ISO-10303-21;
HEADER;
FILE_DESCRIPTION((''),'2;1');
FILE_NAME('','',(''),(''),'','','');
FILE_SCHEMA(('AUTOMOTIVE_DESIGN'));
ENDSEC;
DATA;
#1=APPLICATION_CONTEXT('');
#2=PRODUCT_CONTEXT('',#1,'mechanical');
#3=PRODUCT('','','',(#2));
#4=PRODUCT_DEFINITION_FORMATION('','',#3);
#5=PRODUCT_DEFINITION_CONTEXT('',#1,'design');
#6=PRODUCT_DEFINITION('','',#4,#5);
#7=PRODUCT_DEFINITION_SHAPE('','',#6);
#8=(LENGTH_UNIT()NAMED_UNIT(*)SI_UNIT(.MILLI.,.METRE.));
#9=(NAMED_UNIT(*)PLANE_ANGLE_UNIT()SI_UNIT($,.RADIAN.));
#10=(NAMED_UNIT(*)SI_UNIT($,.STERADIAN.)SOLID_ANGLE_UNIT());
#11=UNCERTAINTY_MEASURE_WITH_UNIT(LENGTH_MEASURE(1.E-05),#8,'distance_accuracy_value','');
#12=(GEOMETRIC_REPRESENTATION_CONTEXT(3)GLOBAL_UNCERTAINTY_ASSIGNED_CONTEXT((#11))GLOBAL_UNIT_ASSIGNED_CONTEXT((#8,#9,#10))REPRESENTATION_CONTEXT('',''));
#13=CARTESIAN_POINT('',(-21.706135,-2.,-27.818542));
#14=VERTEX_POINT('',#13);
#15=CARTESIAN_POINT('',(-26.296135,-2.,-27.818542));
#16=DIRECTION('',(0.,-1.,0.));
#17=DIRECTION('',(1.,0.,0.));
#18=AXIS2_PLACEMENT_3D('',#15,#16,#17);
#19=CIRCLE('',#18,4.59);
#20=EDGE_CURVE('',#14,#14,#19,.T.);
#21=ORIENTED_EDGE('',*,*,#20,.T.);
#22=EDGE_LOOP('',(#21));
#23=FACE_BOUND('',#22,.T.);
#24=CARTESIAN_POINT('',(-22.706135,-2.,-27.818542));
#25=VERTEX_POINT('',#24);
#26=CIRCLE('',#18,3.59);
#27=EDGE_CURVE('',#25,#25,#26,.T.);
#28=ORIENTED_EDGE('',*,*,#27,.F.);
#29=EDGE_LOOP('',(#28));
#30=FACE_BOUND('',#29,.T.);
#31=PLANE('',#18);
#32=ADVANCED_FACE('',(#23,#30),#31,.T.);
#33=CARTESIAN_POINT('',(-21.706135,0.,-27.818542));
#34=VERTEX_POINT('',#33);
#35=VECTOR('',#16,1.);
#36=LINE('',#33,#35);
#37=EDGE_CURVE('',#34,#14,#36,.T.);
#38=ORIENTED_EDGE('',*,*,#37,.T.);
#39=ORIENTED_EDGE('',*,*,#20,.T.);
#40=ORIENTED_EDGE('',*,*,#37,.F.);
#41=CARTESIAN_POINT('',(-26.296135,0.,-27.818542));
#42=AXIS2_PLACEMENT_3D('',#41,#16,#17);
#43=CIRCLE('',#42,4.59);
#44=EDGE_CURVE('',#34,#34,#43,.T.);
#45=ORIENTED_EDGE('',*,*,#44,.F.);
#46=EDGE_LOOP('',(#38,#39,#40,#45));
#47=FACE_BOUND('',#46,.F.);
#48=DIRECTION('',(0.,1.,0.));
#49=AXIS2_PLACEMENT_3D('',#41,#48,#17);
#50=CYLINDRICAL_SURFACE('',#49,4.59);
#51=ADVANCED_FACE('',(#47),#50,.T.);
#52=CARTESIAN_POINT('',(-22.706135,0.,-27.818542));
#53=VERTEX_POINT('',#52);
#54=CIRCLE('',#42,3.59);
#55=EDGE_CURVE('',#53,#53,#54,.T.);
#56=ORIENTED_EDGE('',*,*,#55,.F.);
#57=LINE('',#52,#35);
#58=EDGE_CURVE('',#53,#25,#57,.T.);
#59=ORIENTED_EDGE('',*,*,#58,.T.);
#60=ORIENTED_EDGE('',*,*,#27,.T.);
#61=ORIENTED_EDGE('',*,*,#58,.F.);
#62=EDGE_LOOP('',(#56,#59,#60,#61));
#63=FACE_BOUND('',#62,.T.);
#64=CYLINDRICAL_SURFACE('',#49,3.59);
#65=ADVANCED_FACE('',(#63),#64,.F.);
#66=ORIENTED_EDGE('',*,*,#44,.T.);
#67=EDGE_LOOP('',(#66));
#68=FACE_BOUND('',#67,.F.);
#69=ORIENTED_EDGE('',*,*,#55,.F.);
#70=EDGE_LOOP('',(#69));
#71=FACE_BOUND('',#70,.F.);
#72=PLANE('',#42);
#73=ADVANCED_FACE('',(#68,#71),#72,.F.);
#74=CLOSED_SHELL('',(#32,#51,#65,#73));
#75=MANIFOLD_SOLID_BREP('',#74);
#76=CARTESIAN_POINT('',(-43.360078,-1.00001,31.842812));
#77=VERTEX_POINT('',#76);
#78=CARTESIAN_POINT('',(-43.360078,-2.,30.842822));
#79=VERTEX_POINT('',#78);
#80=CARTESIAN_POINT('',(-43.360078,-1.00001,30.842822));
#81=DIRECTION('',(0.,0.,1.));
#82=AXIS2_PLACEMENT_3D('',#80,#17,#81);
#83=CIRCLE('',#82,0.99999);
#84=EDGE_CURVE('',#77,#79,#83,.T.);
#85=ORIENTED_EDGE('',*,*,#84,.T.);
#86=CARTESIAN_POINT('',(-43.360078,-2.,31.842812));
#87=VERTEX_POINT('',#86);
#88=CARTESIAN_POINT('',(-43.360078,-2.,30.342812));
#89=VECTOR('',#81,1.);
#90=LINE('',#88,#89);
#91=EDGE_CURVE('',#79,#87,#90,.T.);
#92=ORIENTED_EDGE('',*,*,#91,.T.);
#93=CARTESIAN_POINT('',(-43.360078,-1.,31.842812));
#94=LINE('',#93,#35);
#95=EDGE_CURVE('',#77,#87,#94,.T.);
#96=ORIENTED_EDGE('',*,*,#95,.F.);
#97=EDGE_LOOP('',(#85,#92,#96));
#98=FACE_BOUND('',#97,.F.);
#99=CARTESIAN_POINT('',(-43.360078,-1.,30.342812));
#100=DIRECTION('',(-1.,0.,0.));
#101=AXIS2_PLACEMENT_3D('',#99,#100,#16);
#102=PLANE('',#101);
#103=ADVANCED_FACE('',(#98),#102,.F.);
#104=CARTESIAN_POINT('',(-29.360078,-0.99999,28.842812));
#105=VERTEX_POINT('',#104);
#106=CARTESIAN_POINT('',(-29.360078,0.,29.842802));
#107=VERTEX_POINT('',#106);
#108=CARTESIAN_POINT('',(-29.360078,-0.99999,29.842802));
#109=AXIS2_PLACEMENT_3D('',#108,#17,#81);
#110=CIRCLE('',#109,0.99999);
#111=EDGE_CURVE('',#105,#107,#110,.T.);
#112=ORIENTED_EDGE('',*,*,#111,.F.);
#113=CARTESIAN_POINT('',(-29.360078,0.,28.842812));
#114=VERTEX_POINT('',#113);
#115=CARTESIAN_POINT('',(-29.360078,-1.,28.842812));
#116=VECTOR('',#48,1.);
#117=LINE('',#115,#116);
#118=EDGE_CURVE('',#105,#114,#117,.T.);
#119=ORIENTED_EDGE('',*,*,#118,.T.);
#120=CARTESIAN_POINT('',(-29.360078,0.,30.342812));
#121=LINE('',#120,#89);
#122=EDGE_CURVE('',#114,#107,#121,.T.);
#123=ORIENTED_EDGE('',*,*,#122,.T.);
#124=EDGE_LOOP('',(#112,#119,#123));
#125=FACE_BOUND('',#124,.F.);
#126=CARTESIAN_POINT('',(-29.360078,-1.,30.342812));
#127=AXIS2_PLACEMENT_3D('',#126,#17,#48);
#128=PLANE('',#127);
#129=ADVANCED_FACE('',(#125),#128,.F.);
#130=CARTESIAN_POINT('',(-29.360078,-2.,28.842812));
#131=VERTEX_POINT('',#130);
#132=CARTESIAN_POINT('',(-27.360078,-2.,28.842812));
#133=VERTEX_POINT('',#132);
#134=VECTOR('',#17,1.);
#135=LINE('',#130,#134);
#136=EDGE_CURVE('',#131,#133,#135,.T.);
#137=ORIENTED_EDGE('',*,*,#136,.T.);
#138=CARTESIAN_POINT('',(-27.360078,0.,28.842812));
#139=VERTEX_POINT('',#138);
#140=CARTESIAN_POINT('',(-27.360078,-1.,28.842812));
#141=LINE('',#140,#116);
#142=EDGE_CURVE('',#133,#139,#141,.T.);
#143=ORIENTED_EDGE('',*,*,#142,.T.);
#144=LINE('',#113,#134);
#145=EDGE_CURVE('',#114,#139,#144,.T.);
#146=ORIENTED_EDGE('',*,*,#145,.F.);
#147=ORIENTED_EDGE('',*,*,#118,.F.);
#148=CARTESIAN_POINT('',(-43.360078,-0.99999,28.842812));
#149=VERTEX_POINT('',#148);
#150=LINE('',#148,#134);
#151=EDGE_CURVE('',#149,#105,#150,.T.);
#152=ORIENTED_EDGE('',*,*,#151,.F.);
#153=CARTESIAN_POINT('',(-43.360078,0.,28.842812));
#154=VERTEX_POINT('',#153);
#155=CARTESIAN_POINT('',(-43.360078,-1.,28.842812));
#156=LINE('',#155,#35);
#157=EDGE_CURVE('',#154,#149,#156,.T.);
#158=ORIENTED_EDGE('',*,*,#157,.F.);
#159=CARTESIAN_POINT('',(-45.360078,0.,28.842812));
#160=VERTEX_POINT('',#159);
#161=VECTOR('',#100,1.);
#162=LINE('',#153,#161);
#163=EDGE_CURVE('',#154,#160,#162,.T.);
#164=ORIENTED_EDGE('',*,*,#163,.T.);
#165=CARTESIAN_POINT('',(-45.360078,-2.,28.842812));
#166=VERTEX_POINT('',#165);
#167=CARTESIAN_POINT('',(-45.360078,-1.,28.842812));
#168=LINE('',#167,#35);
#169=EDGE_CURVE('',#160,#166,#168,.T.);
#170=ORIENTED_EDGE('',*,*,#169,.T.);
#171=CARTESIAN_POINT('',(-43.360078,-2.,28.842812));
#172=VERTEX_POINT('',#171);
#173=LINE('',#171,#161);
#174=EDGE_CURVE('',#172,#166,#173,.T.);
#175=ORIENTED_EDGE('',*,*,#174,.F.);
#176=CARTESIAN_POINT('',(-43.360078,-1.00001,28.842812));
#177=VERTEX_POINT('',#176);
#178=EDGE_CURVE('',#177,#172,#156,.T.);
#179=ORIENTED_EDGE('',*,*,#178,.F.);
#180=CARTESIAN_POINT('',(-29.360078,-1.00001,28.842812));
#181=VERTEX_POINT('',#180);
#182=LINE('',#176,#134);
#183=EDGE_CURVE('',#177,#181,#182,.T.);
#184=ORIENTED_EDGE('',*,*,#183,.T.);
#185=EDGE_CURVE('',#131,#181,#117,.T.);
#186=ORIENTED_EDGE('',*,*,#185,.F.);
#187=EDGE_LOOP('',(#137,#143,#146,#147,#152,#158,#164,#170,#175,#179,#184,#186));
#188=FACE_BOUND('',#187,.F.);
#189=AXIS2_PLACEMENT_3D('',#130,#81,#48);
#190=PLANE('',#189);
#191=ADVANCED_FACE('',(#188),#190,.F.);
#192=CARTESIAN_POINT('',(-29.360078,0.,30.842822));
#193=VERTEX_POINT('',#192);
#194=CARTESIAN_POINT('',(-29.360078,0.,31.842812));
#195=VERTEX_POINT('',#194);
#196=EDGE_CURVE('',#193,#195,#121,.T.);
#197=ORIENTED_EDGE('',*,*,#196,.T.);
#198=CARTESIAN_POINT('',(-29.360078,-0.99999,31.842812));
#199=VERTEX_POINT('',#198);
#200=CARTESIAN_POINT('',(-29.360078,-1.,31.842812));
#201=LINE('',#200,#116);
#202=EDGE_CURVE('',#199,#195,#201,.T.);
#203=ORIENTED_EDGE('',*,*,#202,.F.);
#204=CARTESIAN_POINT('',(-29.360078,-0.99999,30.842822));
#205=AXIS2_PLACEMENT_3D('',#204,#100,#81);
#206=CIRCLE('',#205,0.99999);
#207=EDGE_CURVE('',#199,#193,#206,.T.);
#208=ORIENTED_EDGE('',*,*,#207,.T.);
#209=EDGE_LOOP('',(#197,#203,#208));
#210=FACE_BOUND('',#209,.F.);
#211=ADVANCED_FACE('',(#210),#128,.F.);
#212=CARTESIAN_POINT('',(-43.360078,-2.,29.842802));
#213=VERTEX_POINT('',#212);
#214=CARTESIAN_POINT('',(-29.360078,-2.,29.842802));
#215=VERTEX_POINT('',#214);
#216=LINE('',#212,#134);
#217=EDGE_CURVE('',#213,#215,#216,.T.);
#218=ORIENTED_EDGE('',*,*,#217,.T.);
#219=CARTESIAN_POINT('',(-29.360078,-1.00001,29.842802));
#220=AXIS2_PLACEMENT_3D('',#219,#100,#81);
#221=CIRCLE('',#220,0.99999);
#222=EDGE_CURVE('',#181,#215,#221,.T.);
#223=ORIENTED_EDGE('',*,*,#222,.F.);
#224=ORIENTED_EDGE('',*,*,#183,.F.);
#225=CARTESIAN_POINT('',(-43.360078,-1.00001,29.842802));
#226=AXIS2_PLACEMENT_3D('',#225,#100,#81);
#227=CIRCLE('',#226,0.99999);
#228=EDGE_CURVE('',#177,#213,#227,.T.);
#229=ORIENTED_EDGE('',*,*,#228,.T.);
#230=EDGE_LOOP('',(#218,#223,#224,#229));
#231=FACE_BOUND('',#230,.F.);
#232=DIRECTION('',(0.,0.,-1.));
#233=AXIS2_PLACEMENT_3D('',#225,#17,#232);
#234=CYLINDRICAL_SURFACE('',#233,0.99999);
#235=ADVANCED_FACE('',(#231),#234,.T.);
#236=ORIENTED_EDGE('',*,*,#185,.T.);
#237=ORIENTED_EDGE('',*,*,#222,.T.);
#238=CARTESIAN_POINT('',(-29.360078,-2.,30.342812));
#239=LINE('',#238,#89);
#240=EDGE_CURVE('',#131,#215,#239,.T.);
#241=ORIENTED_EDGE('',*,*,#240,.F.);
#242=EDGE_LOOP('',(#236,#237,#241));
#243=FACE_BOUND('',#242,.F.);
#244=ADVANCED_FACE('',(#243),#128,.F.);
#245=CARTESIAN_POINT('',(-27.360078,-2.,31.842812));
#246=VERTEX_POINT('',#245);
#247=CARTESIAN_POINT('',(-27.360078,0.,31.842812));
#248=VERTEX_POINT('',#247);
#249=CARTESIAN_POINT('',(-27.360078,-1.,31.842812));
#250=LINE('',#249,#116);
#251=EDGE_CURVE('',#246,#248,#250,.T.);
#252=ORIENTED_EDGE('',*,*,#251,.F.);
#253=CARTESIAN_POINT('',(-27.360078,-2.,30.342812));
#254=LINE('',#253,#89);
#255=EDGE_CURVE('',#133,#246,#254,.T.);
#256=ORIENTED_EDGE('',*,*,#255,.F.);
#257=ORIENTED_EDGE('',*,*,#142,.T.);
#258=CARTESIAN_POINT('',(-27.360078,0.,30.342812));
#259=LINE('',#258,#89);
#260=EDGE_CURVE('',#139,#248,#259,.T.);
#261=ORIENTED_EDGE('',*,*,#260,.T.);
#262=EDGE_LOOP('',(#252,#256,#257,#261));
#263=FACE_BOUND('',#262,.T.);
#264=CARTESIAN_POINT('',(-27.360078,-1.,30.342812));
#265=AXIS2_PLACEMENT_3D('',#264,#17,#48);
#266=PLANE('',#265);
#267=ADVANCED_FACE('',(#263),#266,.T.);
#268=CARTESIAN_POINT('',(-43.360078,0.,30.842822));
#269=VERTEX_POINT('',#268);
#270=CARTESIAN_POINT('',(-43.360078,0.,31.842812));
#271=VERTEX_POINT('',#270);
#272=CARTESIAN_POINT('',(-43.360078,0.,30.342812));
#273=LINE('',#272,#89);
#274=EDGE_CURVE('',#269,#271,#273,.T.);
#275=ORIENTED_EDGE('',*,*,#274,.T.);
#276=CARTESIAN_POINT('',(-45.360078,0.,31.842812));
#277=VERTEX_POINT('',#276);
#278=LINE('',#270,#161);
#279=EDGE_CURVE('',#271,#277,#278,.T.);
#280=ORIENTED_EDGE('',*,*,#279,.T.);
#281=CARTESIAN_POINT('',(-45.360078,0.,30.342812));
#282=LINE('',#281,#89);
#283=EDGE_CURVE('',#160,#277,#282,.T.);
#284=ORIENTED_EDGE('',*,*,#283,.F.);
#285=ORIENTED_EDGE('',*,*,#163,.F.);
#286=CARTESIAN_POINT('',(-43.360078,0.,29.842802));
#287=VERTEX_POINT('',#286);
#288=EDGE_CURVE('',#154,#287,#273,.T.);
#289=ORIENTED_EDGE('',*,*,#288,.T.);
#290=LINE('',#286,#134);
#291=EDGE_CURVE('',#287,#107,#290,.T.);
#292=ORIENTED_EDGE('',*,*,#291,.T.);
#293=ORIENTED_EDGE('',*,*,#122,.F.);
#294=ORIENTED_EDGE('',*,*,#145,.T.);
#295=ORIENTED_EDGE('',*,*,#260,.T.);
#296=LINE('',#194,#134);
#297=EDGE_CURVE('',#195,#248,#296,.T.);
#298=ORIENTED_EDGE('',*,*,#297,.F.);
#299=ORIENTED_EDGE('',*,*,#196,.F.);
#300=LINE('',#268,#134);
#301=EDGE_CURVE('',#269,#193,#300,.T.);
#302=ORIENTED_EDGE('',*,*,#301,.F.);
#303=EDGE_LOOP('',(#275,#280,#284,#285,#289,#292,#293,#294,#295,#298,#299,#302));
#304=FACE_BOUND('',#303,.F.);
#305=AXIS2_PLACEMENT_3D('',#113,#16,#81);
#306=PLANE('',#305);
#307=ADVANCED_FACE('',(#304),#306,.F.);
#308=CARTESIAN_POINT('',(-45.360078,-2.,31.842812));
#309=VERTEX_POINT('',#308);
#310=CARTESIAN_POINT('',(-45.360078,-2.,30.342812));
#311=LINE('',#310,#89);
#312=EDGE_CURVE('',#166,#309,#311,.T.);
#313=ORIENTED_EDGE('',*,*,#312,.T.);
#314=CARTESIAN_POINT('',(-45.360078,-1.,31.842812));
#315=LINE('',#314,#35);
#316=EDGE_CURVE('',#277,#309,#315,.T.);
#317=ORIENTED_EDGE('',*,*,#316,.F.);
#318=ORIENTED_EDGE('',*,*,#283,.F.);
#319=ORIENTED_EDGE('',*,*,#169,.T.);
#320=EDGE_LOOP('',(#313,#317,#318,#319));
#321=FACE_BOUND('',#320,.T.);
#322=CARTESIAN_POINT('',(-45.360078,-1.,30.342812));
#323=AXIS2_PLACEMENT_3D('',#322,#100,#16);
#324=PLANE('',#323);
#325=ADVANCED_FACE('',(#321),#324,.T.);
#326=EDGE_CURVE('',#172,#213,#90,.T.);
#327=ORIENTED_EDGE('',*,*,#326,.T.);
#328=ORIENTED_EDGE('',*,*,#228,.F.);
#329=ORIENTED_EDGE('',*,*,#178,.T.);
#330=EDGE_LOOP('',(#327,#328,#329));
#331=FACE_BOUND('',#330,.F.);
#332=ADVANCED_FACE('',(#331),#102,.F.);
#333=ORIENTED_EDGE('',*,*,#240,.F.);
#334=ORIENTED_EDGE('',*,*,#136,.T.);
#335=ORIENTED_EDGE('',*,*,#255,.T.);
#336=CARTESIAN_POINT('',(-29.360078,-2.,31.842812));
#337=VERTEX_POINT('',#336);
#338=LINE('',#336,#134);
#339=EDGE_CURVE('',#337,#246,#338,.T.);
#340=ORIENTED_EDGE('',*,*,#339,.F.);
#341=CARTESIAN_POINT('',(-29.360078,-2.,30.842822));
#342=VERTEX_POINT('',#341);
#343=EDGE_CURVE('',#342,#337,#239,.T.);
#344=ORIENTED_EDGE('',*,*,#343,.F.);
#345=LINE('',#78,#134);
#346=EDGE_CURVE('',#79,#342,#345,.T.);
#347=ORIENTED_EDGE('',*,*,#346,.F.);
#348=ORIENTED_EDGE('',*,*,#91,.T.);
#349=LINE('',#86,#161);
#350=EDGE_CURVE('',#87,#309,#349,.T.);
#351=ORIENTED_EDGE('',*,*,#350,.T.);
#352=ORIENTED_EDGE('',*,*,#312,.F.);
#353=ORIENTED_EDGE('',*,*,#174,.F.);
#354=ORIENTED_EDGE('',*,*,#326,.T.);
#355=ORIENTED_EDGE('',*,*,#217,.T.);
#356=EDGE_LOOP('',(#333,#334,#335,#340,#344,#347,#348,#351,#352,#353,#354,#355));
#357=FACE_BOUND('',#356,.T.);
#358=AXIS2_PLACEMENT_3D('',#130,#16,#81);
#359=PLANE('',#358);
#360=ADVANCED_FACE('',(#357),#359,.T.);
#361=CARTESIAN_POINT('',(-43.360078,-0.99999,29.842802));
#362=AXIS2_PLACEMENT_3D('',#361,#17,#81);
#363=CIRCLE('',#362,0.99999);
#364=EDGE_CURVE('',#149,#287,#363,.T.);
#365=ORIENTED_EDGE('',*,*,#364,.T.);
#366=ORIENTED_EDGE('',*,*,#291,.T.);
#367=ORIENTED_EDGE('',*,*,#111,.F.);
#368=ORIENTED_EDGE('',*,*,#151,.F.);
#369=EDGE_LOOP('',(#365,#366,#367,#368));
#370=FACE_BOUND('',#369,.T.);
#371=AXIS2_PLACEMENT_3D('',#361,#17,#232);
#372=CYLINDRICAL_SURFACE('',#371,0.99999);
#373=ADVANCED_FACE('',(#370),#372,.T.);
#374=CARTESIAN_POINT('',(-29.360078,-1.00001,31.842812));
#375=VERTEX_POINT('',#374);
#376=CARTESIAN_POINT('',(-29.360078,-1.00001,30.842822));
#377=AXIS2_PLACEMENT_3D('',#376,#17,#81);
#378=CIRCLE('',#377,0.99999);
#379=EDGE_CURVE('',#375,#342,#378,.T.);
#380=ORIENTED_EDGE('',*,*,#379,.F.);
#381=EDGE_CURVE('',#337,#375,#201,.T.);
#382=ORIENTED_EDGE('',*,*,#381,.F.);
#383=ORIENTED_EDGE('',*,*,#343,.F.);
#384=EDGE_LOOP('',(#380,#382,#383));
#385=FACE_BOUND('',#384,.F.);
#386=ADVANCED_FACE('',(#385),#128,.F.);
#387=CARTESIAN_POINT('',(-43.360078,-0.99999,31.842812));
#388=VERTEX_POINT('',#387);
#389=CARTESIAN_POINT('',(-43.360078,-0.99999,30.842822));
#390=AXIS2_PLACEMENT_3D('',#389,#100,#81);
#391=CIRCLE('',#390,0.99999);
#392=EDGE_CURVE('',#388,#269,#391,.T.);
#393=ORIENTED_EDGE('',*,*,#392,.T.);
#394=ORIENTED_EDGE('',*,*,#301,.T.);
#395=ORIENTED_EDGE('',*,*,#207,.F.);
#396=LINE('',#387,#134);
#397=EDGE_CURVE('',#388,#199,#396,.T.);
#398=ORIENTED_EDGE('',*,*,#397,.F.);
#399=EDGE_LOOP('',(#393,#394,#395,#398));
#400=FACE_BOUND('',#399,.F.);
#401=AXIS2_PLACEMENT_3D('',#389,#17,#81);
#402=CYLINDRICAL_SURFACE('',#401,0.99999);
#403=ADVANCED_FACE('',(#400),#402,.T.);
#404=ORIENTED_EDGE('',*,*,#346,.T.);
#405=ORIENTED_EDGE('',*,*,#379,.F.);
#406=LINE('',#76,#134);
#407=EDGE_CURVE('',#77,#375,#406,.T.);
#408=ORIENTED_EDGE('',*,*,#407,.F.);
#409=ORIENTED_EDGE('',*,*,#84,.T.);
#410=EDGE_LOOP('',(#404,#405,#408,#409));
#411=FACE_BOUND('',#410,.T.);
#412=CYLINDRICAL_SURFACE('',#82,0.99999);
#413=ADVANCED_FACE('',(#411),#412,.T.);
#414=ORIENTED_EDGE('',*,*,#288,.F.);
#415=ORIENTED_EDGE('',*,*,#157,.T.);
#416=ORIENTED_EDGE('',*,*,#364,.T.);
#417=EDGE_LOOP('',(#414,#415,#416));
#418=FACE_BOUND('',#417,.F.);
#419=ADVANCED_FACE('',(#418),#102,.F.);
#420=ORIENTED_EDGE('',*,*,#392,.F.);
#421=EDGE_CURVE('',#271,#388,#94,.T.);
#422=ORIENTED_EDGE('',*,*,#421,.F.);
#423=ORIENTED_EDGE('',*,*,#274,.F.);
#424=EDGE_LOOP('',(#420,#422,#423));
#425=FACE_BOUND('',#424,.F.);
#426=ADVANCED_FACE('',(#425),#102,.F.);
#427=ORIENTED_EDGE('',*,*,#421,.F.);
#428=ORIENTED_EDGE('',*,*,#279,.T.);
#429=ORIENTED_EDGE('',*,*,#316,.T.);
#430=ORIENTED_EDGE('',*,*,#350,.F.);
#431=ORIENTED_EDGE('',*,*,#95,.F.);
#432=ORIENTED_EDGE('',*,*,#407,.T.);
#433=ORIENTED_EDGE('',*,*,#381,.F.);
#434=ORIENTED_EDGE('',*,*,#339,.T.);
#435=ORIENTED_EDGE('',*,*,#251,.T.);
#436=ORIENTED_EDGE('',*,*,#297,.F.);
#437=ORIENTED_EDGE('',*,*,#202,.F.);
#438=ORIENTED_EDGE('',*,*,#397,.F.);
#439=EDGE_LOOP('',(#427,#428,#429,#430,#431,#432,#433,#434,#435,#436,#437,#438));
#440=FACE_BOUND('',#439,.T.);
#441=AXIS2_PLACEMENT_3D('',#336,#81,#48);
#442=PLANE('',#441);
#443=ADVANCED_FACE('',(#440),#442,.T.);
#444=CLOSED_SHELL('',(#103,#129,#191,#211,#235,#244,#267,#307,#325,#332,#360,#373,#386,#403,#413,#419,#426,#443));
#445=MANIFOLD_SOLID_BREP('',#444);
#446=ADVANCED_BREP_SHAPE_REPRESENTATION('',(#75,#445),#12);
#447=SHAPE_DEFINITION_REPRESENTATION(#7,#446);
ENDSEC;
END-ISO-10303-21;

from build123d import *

# Parameters (mm, degrees)
F0_W     = 14
F0_H     = 3
F1_DEPTH = 2
F4_R     = 0.99999
F2_W     = 2
F2_H     = 3
F5_DEPTH = 2
F3_W     = 2
F3_H     = 3
F6_DEPTH = 2
F7_R     = 4.59
F7_R_2   = 3.59
F8_DEPTH = 2


# Not quite as in the source:
# - a fillet or chamfer is up to 0.001 mm smaller than in the source, because OpenCascade refuses the exact size


with BuildPart() as f1:
    # F0 (on Front) → F1 (new body)
    with BuildSketch(Plane.XZ):
        with Locations((-36.3600781634, 30.342812404)):
            Rectangle(F0_W, F0_H)
    extrude(amount=F1_DEPTH)

    # F4 (radius 1 in the source; OpenCascade refuses exactly that, so slightly less here)
    f4_edges = [f1.edges().sort_by_distance(p)[0] for p in [
        (-36.360078, 0, 31.842812),
        (-36.360078, 0, 28.842812),
        (-36.360078, -2, 31.842812),
        (-36.360078, -2, 28.842812),
    ]]
    fillet(f4_edges, radius=F4_R)

    # F2 (on face) → F5 (join)
    with BuildSketch(Plane(origin=(-43.3600781634, 0, 0), x_dir=(0, -1, 0), z_dir=(-1, 0, 0))):
        with Locations((1, 30.342812404)):
            Rectangle(F2_W, F2_H)
    extrude(amount=F5_DEPTH)

    # F3 (on face) → F6 (join)
    with BuildSketch(Plane.YZ.offset(-29.3600781634)):
        with Locations((-1, 30.342812404)):
            Rectangle(F3_W, F3_H)
    extrude(amount=F6_DEPTH)


with BuildPart() as f8:
    # F7 (on Front) → F8 (new body)
    with BuildSketch(Plane.XZ):
        with Locations((-26.2961350381, -27.8185419738)):
            Circle(F7_R)
        with Locations((-26.2961350381, -27.8185419738)):
            Circle(F7_R_2, mode=Mode.SUBTRACT)
    extrude(amount=F8_DEPTH)


solid = Compound([f1.part, f8.part])
